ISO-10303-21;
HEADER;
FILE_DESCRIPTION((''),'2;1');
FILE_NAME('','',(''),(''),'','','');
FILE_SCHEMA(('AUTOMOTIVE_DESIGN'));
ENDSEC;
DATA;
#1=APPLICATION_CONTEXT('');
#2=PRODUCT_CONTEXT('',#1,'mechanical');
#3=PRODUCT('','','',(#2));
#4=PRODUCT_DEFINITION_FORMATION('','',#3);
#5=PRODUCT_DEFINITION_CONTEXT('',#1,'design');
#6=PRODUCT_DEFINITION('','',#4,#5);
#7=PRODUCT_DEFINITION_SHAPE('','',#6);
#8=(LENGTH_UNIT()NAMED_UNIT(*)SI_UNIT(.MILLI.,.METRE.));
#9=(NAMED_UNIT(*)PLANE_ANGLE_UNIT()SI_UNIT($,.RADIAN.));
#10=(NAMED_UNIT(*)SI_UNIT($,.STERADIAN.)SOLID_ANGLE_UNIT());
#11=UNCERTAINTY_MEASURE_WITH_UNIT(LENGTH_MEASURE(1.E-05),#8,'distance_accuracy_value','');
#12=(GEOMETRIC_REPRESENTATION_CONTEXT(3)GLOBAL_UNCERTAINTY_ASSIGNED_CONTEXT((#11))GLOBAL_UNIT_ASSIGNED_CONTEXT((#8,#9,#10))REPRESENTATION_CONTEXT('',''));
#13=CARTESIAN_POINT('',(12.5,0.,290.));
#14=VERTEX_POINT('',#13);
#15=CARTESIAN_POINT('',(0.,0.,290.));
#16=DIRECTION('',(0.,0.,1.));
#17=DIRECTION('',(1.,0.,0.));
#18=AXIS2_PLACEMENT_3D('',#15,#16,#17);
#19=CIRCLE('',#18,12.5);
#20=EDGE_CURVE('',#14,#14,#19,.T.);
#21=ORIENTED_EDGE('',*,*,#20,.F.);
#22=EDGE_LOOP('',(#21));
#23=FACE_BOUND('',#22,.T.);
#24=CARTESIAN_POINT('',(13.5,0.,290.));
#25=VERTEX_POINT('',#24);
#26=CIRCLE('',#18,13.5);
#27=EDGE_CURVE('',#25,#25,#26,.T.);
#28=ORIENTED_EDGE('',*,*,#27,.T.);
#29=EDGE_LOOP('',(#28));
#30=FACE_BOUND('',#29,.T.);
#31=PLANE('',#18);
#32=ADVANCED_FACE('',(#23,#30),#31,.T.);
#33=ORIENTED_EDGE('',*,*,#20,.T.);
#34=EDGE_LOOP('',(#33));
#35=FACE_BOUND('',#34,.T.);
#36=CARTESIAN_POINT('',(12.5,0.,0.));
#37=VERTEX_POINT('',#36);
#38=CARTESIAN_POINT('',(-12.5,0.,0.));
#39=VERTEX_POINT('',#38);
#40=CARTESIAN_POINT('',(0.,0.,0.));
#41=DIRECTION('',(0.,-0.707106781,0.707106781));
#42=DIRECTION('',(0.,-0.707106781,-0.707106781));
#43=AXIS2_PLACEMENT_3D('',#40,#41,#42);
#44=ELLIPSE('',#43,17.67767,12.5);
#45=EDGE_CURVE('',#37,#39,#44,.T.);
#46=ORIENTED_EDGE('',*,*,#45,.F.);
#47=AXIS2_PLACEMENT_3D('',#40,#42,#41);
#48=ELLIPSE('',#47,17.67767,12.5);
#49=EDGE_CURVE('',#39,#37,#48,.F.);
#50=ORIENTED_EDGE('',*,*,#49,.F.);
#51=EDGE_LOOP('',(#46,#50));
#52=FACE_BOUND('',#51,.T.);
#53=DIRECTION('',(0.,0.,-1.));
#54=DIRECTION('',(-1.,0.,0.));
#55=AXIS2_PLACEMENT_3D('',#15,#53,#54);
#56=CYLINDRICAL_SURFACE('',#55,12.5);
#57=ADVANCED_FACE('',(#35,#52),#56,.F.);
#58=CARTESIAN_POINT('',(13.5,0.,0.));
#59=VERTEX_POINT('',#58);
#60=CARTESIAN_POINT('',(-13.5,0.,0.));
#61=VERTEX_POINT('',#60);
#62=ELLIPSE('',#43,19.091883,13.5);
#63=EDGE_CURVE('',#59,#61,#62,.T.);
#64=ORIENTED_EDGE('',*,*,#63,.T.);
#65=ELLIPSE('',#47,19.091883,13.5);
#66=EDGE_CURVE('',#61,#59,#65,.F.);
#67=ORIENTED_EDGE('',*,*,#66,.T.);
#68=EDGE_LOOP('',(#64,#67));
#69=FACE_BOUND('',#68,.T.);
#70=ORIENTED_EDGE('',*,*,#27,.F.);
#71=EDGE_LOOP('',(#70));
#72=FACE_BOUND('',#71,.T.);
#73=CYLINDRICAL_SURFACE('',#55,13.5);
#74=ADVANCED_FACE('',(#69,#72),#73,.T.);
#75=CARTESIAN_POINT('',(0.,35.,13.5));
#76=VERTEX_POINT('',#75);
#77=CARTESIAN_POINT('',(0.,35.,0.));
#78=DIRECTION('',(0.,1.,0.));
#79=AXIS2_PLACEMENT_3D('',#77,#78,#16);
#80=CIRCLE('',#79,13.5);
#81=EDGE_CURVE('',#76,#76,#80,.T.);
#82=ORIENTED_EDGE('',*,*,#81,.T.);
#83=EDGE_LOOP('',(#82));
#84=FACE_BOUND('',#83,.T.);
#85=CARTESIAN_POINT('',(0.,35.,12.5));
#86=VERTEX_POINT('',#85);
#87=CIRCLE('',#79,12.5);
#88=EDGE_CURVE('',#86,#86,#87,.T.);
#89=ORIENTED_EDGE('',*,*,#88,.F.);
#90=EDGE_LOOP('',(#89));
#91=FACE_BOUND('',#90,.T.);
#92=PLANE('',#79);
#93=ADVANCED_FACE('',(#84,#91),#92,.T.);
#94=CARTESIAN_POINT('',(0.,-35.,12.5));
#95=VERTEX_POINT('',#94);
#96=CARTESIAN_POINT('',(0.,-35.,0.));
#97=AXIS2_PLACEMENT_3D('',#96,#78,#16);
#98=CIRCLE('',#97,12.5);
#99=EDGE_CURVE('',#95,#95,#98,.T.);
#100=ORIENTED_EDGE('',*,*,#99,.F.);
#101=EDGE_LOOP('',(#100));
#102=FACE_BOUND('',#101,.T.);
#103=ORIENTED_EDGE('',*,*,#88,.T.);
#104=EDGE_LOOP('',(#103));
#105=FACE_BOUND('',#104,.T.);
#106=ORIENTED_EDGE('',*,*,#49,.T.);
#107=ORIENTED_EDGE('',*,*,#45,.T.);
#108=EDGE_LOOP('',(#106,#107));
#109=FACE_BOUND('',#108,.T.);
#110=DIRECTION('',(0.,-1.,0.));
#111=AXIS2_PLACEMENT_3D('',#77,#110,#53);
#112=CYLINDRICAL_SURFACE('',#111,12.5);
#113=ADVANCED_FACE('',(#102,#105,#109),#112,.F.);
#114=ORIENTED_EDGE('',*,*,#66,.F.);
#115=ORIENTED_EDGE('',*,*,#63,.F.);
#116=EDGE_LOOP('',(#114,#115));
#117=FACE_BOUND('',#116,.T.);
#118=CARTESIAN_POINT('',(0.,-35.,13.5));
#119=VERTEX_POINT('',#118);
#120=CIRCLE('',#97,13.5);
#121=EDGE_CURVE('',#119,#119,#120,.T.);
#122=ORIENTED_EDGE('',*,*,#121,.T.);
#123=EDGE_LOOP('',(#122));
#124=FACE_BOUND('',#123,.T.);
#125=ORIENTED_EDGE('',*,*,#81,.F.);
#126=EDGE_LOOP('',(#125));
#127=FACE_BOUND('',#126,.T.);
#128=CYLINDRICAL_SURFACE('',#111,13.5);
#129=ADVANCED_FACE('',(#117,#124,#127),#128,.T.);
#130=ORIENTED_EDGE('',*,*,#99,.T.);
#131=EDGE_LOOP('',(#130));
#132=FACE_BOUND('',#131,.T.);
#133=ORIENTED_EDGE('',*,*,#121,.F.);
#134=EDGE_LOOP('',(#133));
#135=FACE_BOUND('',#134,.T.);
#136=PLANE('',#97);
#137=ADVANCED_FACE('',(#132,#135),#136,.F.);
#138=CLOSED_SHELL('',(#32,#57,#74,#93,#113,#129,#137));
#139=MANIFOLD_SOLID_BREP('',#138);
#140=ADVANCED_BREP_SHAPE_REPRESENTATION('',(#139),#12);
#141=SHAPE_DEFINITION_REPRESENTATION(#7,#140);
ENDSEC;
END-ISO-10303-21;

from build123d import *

# Parameters (mm, degrees)
SKETCH1_R           = 13.5
BOSS_EXTRUDE1_DEPTH = 35
SKETCH2_R           = 13.5
BOSS_EXTRUDE2_DEPTH = 290
SHELL1_START        = -35
SHELL1_OUTLINE_R    = 12.5
SHELL1_DEPTH        = 70
SHELL1_START_2      = -1e-07
SHELL1_2_OUTLINE_R  = 12.5
SHELL1_2_DEPTH      = 290.0000001


with BuildPart() as part:
    # Sketch1 → Boss-Extrude1 (new, symmetric)
    with BuildSketch(Plane(origin=(0, 0, 0), x_dir=(1, 0, 0), z_dir=(0, 1, 0))):
        with Locations(Location((0, 0, 0), (0, 0, 270))):
            Circle(SKETCH1_R)
    extrude(amount=BOSS_EXTRUDE1_DEPTH, both=True)

    # Sketch2 → Boss-Extrude2 (add)
    with BuildSketch(Plane.XY):
        Circle(SKETCH2_R)
    extrude(amount=BOSS_EXTRUDE2_DEPTH)

    # Shell1: read off the stored shape, not the designer's step
    # Shell1 outline → Shell1 (cut)
    with BuildSketch(Plane(origin=(0, 0, 0), x_dir=(1, 0, 0), z_dir=(0, 1, 0)).offset(SHELL1_START)):
        Circle(SHELL1_OUTLINE_R)
    extrude(amount=SHELL1_DEPTH, mode=Mode.SUBTRACT)

    # Shell1 2 outline → Shell1 2 (cut)
    with BuildSketch(Plane.XY.offset(SHELL1_START_2)):
        Circle(SHELL1_2_OUTLINE_R)
    extrude(amount=SHELL1_2_DEPTH, mode=Mode.SUBTRACT)


solid = part.part
